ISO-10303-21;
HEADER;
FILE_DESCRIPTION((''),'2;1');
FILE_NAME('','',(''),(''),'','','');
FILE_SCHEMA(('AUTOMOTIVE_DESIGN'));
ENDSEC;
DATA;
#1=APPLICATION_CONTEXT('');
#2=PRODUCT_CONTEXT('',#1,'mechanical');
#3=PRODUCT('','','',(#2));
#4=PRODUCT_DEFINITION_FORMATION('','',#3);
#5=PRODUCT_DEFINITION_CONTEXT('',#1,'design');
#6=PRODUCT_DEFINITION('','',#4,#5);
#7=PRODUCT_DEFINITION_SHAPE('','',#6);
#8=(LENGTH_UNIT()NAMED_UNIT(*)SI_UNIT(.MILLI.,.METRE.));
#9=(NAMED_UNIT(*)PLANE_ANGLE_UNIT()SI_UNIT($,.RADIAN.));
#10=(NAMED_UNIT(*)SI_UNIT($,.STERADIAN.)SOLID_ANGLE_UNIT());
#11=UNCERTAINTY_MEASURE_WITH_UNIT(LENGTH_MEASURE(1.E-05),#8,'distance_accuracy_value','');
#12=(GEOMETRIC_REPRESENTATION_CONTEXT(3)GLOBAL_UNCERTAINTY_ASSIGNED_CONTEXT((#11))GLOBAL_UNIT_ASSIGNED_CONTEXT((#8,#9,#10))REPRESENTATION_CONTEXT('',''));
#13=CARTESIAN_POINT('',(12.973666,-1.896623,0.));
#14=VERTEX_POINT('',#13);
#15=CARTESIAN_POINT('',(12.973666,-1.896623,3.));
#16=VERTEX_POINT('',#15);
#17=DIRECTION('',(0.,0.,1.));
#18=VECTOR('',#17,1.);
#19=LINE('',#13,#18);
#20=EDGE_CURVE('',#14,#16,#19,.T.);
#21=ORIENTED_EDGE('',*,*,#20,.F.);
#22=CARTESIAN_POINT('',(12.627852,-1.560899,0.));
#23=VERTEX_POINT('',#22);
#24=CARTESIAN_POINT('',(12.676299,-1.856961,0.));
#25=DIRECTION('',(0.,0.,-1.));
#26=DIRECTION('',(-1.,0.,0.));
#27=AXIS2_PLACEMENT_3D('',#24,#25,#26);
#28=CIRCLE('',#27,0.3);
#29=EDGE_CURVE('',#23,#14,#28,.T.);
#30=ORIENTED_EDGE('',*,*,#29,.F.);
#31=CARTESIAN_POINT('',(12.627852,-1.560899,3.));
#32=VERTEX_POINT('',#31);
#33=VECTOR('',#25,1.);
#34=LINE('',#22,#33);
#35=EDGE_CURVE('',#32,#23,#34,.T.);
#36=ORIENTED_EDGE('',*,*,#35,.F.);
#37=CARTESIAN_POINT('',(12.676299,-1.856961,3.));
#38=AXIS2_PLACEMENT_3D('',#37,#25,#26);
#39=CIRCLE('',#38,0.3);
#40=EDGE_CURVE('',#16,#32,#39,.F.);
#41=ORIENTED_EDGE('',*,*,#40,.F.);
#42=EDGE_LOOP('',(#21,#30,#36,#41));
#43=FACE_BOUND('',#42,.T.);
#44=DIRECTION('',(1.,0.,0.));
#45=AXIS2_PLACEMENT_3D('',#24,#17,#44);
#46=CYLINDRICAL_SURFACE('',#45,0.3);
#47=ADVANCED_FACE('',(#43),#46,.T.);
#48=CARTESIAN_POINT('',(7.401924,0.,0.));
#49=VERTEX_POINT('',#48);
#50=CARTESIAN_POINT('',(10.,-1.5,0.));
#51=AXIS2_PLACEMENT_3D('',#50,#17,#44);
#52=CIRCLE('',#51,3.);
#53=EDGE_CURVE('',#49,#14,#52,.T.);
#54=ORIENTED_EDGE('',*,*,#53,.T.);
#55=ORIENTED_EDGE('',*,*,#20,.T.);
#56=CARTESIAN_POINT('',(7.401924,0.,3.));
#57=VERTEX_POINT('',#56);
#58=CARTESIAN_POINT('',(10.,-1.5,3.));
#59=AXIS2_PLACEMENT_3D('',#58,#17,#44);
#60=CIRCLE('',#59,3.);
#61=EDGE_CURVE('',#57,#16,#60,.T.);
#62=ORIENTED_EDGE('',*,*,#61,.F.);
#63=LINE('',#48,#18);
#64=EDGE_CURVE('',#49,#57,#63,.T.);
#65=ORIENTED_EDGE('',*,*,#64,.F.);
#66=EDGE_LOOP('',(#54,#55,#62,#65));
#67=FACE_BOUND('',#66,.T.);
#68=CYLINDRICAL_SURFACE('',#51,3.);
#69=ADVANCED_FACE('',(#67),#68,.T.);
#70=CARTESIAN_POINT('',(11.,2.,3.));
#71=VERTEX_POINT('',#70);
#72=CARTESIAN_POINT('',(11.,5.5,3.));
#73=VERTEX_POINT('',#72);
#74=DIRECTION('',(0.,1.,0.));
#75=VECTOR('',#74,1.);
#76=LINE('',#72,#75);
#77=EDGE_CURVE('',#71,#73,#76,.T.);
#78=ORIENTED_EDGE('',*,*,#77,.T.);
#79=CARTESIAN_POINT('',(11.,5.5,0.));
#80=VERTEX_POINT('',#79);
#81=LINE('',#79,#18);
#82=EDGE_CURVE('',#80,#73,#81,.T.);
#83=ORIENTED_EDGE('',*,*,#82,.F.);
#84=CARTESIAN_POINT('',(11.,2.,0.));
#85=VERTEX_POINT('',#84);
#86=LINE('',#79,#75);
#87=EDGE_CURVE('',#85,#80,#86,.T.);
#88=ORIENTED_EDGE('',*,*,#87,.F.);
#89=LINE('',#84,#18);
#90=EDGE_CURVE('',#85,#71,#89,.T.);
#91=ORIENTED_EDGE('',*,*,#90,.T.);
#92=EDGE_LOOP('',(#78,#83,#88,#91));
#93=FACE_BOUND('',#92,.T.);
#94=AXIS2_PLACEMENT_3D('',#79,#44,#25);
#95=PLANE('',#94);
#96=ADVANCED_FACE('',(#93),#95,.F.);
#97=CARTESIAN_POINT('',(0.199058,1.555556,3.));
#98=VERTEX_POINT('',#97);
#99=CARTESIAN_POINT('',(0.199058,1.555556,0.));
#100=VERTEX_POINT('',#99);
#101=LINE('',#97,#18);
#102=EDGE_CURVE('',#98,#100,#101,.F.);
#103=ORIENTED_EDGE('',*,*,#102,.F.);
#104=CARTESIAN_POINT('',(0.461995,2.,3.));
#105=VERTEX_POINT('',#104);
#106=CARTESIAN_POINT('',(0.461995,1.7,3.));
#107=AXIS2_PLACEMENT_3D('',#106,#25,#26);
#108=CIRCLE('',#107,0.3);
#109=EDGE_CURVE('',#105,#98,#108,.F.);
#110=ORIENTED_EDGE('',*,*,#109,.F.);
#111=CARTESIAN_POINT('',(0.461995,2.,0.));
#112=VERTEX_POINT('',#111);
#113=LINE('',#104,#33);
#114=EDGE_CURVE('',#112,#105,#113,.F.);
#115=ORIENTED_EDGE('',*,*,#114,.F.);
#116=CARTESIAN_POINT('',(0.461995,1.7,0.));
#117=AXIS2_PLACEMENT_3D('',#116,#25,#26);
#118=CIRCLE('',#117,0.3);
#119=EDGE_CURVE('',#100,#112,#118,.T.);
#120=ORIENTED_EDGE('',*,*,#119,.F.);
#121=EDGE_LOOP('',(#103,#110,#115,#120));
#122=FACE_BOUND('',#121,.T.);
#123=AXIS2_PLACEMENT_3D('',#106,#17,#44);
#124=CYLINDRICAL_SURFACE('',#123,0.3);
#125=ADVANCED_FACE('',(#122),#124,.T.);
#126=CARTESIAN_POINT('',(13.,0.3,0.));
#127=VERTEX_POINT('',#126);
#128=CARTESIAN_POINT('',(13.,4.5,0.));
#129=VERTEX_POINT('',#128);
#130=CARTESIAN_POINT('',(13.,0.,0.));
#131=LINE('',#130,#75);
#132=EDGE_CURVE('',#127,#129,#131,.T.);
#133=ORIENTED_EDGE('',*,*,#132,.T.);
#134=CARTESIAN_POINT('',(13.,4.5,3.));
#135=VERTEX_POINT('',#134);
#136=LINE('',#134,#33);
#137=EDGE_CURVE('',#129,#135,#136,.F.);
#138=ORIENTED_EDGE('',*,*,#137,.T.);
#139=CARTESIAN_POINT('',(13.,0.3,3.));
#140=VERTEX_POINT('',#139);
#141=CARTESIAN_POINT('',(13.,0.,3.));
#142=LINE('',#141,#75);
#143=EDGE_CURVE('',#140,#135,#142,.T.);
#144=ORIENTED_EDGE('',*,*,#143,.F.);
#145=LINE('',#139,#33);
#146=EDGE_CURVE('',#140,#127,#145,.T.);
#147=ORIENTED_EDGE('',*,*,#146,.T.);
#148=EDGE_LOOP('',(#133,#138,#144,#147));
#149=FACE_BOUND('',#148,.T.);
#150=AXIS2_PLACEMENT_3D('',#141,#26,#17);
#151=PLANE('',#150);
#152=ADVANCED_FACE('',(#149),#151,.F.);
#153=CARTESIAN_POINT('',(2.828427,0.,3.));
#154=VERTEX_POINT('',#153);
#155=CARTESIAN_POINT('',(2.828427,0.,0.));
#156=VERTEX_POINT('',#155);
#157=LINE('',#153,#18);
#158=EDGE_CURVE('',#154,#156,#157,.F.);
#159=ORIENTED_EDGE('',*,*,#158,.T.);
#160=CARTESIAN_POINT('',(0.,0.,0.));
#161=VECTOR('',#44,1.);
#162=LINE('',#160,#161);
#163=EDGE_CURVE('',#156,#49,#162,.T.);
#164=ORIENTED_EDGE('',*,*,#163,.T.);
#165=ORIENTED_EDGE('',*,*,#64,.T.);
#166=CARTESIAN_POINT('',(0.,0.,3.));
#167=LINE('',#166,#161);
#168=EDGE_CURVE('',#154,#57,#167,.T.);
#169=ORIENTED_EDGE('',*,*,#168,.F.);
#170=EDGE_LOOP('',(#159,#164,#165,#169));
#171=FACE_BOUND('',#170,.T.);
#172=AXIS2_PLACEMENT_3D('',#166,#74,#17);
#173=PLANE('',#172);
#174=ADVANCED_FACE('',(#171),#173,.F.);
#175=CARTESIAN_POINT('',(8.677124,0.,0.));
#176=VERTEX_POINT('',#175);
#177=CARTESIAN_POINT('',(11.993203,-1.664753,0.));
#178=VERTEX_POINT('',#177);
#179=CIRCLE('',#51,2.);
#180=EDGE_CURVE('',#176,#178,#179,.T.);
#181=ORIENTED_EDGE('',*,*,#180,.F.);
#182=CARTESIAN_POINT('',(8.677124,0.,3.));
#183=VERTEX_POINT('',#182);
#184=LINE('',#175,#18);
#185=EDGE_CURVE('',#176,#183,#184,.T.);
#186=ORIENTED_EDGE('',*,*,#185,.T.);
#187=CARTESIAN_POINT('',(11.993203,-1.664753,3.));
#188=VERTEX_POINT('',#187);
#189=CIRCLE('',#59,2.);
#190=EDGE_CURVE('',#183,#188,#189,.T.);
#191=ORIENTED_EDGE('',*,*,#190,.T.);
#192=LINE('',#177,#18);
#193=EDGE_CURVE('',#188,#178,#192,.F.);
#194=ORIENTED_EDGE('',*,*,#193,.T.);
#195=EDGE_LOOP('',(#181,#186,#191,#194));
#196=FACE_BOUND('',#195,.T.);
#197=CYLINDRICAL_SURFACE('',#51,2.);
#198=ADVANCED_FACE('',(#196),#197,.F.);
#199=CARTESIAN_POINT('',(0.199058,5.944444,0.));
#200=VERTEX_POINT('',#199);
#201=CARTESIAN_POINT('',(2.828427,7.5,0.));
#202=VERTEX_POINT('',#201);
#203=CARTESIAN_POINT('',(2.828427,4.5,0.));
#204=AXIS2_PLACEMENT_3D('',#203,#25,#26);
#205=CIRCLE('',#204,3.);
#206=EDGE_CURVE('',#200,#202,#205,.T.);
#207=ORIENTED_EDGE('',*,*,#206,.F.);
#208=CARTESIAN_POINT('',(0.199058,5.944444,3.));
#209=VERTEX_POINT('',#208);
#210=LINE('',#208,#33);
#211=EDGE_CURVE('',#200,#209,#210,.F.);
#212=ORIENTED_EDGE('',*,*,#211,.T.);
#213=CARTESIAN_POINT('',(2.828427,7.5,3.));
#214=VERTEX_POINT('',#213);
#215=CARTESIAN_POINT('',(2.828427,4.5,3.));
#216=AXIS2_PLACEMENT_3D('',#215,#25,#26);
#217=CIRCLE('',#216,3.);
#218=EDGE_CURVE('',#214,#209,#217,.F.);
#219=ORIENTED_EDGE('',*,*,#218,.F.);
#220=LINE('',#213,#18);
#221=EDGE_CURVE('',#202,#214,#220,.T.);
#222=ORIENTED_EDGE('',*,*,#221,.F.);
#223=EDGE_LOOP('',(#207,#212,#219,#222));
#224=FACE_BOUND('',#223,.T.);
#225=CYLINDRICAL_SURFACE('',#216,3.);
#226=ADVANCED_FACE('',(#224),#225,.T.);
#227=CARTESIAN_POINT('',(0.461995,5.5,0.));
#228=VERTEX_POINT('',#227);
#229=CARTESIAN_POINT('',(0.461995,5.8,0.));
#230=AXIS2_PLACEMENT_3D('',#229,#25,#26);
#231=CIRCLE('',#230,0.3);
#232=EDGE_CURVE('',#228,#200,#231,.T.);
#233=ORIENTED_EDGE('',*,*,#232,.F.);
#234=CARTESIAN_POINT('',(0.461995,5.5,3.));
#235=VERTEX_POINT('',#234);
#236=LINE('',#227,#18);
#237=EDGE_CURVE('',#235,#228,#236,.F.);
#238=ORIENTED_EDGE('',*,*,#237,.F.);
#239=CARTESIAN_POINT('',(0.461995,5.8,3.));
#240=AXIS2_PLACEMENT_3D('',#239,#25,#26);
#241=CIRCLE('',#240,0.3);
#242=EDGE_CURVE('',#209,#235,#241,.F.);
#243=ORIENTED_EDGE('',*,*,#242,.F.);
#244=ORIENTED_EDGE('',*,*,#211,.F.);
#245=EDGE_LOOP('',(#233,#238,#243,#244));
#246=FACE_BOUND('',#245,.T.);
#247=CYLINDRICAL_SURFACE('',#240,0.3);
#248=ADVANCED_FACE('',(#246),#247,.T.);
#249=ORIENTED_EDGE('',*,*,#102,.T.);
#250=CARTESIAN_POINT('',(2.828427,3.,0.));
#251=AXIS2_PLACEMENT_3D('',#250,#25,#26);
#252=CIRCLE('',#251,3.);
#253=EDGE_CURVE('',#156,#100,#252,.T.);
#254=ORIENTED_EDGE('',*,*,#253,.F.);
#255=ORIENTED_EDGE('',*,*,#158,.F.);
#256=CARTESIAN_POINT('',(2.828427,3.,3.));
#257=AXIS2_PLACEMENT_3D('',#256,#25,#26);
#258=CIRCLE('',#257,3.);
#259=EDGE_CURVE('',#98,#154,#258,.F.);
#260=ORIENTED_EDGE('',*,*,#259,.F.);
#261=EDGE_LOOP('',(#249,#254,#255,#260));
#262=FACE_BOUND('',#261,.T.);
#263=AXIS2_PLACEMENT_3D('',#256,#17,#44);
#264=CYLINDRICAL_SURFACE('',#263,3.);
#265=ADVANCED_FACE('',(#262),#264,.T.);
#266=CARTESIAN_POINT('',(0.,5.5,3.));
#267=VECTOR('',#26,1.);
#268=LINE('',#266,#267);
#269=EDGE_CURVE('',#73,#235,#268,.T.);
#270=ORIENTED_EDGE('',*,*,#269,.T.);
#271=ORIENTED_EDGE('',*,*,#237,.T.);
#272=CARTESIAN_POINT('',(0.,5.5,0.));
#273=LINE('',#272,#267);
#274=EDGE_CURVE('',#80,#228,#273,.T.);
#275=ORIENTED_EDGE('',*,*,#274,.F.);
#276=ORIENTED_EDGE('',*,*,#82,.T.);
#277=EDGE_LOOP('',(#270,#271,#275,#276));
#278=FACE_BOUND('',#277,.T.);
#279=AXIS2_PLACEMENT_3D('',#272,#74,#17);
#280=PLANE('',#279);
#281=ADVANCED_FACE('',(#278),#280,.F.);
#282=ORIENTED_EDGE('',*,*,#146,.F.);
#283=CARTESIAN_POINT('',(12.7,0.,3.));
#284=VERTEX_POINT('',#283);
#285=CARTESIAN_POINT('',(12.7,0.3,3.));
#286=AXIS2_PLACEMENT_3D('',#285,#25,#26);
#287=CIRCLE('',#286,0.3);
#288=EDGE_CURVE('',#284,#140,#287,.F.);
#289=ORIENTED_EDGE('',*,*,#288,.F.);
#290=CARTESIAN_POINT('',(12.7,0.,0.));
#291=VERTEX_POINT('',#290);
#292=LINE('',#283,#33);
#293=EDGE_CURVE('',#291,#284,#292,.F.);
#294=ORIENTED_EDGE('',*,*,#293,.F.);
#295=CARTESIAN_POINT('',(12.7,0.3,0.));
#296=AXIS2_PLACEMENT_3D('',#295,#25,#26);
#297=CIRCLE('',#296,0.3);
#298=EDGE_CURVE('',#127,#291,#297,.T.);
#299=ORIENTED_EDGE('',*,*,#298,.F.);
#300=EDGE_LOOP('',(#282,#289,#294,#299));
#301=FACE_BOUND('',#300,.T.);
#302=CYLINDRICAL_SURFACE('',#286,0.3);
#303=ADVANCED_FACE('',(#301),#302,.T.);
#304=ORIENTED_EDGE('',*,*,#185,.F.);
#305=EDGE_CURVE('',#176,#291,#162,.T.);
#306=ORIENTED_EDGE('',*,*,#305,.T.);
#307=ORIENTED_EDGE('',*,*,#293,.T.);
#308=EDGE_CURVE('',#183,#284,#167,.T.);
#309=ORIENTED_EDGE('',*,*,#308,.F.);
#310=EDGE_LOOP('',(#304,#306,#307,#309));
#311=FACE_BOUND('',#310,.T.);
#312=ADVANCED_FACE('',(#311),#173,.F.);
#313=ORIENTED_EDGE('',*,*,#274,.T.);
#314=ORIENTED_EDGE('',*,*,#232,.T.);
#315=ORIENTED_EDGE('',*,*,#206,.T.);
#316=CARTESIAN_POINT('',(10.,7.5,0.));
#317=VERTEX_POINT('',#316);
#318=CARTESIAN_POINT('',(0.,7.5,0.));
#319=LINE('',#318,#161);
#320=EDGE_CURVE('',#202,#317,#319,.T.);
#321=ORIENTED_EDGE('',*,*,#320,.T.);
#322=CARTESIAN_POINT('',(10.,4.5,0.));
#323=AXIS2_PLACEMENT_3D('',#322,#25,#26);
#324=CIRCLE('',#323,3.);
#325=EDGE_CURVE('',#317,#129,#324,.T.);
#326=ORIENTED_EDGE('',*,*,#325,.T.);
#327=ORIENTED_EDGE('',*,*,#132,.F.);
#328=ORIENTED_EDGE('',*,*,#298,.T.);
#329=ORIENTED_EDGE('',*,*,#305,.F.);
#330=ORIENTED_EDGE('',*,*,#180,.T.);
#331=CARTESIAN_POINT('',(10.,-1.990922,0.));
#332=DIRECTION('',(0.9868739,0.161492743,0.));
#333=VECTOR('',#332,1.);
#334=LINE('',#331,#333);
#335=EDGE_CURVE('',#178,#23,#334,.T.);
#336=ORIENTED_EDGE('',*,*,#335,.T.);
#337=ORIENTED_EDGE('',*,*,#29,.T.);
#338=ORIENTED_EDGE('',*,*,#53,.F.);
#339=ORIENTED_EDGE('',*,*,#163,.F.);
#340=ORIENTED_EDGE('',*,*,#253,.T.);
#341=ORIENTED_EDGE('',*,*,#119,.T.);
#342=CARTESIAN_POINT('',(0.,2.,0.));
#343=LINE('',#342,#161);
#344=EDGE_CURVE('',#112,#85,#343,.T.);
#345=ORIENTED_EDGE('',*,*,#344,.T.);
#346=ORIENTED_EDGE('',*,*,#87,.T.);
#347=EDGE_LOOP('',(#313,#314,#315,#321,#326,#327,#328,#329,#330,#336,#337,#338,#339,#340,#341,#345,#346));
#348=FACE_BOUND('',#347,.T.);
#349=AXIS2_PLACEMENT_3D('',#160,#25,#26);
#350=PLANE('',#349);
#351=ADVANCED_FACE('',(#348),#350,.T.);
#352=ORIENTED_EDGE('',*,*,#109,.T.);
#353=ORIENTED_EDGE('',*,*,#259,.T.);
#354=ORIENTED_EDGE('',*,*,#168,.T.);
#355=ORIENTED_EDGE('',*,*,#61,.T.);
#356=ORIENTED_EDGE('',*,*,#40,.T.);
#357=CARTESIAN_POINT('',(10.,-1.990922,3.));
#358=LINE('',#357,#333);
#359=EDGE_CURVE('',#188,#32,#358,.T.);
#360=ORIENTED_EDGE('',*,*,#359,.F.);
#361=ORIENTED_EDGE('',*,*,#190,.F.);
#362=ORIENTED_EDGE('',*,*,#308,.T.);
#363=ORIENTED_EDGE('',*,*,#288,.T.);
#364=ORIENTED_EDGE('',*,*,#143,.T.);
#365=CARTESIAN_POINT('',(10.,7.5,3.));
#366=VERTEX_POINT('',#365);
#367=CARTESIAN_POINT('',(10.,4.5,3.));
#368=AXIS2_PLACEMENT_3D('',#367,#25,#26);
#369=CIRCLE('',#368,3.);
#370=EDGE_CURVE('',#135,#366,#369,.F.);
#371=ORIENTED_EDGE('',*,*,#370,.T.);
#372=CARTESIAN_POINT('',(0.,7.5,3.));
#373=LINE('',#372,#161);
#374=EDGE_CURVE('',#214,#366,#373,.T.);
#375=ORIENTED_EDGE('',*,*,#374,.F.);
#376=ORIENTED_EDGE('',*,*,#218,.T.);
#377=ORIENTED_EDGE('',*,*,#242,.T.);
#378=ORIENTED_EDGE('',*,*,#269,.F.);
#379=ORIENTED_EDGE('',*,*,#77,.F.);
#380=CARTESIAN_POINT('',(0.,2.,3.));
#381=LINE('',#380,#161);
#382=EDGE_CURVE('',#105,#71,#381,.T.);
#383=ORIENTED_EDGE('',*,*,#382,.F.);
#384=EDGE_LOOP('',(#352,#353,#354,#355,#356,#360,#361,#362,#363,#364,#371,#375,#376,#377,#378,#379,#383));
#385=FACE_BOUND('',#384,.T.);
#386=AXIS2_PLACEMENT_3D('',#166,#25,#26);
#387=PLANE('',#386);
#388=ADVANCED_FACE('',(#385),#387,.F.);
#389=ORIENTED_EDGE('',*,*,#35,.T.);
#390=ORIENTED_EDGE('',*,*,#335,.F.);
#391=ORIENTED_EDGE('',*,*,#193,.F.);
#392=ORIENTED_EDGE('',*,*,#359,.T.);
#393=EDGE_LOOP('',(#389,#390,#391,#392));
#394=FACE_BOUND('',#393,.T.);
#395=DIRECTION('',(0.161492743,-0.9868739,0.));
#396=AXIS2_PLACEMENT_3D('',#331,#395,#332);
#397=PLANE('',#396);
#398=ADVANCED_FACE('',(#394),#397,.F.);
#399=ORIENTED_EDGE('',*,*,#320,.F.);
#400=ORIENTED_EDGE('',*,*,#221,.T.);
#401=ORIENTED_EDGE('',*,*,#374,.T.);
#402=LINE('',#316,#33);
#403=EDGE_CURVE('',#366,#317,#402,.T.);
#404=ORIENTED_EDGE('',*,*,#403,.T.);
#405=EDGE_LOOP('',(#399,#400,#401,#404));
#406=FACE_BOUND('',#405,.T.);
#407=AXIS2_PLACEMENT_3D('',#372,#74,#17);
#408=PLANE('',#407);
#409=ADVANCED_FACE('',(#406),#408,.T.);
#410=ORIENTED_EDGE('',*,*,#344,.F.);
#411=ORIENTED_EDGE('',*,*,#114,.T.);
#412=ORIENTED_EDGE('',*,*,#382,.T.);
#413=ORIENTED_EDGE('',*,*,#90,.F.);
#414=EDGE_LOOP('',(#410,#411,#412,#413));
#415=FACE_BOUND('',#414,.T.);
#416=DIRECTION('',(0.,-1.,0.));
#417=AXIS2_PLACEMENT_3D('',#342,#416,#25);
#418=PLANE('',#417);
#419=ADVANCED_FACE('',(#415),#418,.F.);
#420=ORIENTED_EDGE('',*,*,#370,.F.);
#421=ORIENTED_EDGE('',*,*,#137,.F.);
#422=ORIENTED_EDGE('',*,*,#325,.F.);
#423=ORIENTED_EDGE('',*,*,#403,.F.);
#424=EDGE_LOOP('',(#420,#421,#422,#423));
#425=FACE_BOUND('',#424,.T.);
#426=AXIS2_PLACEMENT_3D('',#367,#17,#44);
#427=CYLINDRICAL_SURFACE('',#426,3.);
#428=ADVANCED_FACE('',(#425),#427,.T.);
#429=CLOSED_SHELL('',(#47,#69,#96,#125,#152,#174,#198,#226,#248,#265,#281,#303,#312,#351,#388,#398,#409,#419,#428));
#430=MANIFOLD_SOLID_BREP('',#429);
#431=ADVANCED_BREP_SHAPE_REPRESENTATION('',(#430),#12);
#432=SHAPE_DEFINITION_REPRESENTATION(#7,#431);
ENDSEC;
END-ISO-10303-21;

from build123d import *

# Parameters (mm, degrees)
SZKIC1_W                    = 13
SZKIC1_H                    = 7.5
DODANIE_WYCI_GNI_CIE1_DEPTH = 3
SZKIC2_W                    = 11
SZKIC2_H                    = 3.5
WYTNIJ_WYCI_GNI_CIE1_DEPTH  = 3
ZAOKR_GLENIE1_R             = 3
SZKIC3_R                    = 3
SZKIC3_R_2                  = 2
DODANIE_WYCI_GNI_CIE2_DEPTH = 3
WYTNIJ_WYCI_GNI_CIE2_DEPTH  = 3
ZAOKR_GLENIE2_R             = 0.3


with BuildPart() as part:
    # Szkic1 → Dodanie-wyciągnięcie1 (new body)
    with BuildSketch(Plane.XY):
        with Locations((6.5, 3.75)):
            Rectangle(SZKIC1_W, SZKIC1_H)
    extrude(amount=DODANIE_WYCI_GNI_CIE1_DEPTH)

    # Szkic2 → Wytnij-wyciągnięcie1 (cut)
    with BuildSketch(Plane.XY.offset(3)):
        with Locations((5.5, 3.75)):
            Rectangle(SZKIC2_W, SZKIC2_H)
    extrude(amount=-WYTNIJ_WYCI_GNI_CIE1_DEPTH, mode=Mode.SUBTRACT)

    # Zaokrąglenie1
    # the kernel refuses this fillet: 3 mm, written as the material it takes off along each edge
    with BuildSketch(Plane(origin=(13, 7.5, -7.5), x_dir=(0, -1, 0), z_dir=(0, 0, 1))) as zaokr_glenie1_piece_1:
        with BuildLine():
            CenterArc((ZAOKR_GLENIE1_R, -ZAOKR_GLENIE1_R), ZAOKR_GLENIE1_R, 90, 90)
            Line((0, -ZAOKR_GLENIE1_R), (-ZAOKR_GLENIE1_R * 0.02, -ZAOKR_GLENIE1_R))
            Line((-ZAOKR_GLENIE1_R * 0.02, -ZAOKR_GLENIE1_R), (-ZAOKR_GLENIE1_R * 0.02, ZAOKR_GLENIE1_R * 0.02))
            Line((-ZAOKR_GLENIE1_R * 0.02, ZAOKR_GLENIE1_R * 0.02), (ZAOKR_GLENIE1_R, ZAOKR_GLENIE1_R * 0.02))
            Line((ZAOKR_GLENIE1_R, ZAOKR_GLENIE1_R * 0.02), (ZAOKR_GLENIE1_R, 0))
        make_face()
    extrude(amount=18, mode=Mode.SUBTRACT)
    with BuildSketch(Plane(origin=(0, 0, -7.071067812), x_dir=(1, 0, 0), z_dir=(0, 0, 1))) as zaokr_glenie1_piece_2:
        with BuildLine():
            CenterArc((2.828427125, 3), ZAOKR_GLENIE1_R, 199.471220634, 70.528779366)
            Line((0, 2), (-0.056568542, 1.98))
            ThreePointArc((-0.056568542, 1.98), (-0.06, 1), (-0.06, 0))
            Line((-0.06, 0), (0, -0.06))
            Line((0, -0.06), (2.828427125, -0.06))
            Line((2.828427125, -0.06), (2.828427125, 0))
        make_face()
    extrude(amount=17.142135624, mode=Mode.SUBTRACT)
    with BuildSketch(Plane(origin=(0, 7.5, -7.071067812), x_dir=(1, 0, 0), z_dir=(0, 0, 1))) as zaokr_glenie1_piece_3:
        with BuildLine():
            CenterArc((2.828427125, -3), ZAOKR_GLENIE1_R, 90, 70.528779366)
            Line((0, -2), (-0.056568542, -1.98))
            ThreePointArc((-0.056568542, -1.98), (-0.06, -1), (-0.06, 0))
            Line((-0.06, 0), (0, 0.06))
            Line((0, 0.06), (2.828427125, 0.06))
            Line((2.828427125, 0.06), (2.828427125, 0))
        make_face()
    extrude(amount=17.142135624, mode=Mode.SUBTRACT)

    # Szkic3 → Dodanie-wyciągnięcie2 (add)
    with BuildSketch(Plane.XY.offset(3)):
        with Locations((10, -1.5)):
            Circle(SZKIC3_R)
        with Locations((10, -1.5)):
            Circle(SZKIC3_R_2, mode=Mode.SUBTRACT)
    extrude(amount=-DODANIE_WYCI_GNI_CIE2_DEPTH)

    # Szkic4 → Wytnij-wyciągnięcie2 (cut)
    with BuildSketch(Plane.XY.offset(3)):
        Polygon((10, 0), (13, 0), (13, -1.5), (10, -1.990922123), align=None)
    extrude(amount=-WYTNIJ_WYCI_GNI_CIE2_DEPTH, mode=Mode.SUBTRACT)

    # Zaokrąglenie2
    zaokr_glenie2_edges = [part.edges().sort_by_distance(p)[0] for p in [
        (0, 2, 1.5),
        (0, 5.5, 1.5),
        (13, -1.5, 1.5),
        (13, 0, 1.5),
    ]]
    fillet(zaokr_glenie2_edges, radius=ZAOKR_GLENIE2_R)


solid = part.part
